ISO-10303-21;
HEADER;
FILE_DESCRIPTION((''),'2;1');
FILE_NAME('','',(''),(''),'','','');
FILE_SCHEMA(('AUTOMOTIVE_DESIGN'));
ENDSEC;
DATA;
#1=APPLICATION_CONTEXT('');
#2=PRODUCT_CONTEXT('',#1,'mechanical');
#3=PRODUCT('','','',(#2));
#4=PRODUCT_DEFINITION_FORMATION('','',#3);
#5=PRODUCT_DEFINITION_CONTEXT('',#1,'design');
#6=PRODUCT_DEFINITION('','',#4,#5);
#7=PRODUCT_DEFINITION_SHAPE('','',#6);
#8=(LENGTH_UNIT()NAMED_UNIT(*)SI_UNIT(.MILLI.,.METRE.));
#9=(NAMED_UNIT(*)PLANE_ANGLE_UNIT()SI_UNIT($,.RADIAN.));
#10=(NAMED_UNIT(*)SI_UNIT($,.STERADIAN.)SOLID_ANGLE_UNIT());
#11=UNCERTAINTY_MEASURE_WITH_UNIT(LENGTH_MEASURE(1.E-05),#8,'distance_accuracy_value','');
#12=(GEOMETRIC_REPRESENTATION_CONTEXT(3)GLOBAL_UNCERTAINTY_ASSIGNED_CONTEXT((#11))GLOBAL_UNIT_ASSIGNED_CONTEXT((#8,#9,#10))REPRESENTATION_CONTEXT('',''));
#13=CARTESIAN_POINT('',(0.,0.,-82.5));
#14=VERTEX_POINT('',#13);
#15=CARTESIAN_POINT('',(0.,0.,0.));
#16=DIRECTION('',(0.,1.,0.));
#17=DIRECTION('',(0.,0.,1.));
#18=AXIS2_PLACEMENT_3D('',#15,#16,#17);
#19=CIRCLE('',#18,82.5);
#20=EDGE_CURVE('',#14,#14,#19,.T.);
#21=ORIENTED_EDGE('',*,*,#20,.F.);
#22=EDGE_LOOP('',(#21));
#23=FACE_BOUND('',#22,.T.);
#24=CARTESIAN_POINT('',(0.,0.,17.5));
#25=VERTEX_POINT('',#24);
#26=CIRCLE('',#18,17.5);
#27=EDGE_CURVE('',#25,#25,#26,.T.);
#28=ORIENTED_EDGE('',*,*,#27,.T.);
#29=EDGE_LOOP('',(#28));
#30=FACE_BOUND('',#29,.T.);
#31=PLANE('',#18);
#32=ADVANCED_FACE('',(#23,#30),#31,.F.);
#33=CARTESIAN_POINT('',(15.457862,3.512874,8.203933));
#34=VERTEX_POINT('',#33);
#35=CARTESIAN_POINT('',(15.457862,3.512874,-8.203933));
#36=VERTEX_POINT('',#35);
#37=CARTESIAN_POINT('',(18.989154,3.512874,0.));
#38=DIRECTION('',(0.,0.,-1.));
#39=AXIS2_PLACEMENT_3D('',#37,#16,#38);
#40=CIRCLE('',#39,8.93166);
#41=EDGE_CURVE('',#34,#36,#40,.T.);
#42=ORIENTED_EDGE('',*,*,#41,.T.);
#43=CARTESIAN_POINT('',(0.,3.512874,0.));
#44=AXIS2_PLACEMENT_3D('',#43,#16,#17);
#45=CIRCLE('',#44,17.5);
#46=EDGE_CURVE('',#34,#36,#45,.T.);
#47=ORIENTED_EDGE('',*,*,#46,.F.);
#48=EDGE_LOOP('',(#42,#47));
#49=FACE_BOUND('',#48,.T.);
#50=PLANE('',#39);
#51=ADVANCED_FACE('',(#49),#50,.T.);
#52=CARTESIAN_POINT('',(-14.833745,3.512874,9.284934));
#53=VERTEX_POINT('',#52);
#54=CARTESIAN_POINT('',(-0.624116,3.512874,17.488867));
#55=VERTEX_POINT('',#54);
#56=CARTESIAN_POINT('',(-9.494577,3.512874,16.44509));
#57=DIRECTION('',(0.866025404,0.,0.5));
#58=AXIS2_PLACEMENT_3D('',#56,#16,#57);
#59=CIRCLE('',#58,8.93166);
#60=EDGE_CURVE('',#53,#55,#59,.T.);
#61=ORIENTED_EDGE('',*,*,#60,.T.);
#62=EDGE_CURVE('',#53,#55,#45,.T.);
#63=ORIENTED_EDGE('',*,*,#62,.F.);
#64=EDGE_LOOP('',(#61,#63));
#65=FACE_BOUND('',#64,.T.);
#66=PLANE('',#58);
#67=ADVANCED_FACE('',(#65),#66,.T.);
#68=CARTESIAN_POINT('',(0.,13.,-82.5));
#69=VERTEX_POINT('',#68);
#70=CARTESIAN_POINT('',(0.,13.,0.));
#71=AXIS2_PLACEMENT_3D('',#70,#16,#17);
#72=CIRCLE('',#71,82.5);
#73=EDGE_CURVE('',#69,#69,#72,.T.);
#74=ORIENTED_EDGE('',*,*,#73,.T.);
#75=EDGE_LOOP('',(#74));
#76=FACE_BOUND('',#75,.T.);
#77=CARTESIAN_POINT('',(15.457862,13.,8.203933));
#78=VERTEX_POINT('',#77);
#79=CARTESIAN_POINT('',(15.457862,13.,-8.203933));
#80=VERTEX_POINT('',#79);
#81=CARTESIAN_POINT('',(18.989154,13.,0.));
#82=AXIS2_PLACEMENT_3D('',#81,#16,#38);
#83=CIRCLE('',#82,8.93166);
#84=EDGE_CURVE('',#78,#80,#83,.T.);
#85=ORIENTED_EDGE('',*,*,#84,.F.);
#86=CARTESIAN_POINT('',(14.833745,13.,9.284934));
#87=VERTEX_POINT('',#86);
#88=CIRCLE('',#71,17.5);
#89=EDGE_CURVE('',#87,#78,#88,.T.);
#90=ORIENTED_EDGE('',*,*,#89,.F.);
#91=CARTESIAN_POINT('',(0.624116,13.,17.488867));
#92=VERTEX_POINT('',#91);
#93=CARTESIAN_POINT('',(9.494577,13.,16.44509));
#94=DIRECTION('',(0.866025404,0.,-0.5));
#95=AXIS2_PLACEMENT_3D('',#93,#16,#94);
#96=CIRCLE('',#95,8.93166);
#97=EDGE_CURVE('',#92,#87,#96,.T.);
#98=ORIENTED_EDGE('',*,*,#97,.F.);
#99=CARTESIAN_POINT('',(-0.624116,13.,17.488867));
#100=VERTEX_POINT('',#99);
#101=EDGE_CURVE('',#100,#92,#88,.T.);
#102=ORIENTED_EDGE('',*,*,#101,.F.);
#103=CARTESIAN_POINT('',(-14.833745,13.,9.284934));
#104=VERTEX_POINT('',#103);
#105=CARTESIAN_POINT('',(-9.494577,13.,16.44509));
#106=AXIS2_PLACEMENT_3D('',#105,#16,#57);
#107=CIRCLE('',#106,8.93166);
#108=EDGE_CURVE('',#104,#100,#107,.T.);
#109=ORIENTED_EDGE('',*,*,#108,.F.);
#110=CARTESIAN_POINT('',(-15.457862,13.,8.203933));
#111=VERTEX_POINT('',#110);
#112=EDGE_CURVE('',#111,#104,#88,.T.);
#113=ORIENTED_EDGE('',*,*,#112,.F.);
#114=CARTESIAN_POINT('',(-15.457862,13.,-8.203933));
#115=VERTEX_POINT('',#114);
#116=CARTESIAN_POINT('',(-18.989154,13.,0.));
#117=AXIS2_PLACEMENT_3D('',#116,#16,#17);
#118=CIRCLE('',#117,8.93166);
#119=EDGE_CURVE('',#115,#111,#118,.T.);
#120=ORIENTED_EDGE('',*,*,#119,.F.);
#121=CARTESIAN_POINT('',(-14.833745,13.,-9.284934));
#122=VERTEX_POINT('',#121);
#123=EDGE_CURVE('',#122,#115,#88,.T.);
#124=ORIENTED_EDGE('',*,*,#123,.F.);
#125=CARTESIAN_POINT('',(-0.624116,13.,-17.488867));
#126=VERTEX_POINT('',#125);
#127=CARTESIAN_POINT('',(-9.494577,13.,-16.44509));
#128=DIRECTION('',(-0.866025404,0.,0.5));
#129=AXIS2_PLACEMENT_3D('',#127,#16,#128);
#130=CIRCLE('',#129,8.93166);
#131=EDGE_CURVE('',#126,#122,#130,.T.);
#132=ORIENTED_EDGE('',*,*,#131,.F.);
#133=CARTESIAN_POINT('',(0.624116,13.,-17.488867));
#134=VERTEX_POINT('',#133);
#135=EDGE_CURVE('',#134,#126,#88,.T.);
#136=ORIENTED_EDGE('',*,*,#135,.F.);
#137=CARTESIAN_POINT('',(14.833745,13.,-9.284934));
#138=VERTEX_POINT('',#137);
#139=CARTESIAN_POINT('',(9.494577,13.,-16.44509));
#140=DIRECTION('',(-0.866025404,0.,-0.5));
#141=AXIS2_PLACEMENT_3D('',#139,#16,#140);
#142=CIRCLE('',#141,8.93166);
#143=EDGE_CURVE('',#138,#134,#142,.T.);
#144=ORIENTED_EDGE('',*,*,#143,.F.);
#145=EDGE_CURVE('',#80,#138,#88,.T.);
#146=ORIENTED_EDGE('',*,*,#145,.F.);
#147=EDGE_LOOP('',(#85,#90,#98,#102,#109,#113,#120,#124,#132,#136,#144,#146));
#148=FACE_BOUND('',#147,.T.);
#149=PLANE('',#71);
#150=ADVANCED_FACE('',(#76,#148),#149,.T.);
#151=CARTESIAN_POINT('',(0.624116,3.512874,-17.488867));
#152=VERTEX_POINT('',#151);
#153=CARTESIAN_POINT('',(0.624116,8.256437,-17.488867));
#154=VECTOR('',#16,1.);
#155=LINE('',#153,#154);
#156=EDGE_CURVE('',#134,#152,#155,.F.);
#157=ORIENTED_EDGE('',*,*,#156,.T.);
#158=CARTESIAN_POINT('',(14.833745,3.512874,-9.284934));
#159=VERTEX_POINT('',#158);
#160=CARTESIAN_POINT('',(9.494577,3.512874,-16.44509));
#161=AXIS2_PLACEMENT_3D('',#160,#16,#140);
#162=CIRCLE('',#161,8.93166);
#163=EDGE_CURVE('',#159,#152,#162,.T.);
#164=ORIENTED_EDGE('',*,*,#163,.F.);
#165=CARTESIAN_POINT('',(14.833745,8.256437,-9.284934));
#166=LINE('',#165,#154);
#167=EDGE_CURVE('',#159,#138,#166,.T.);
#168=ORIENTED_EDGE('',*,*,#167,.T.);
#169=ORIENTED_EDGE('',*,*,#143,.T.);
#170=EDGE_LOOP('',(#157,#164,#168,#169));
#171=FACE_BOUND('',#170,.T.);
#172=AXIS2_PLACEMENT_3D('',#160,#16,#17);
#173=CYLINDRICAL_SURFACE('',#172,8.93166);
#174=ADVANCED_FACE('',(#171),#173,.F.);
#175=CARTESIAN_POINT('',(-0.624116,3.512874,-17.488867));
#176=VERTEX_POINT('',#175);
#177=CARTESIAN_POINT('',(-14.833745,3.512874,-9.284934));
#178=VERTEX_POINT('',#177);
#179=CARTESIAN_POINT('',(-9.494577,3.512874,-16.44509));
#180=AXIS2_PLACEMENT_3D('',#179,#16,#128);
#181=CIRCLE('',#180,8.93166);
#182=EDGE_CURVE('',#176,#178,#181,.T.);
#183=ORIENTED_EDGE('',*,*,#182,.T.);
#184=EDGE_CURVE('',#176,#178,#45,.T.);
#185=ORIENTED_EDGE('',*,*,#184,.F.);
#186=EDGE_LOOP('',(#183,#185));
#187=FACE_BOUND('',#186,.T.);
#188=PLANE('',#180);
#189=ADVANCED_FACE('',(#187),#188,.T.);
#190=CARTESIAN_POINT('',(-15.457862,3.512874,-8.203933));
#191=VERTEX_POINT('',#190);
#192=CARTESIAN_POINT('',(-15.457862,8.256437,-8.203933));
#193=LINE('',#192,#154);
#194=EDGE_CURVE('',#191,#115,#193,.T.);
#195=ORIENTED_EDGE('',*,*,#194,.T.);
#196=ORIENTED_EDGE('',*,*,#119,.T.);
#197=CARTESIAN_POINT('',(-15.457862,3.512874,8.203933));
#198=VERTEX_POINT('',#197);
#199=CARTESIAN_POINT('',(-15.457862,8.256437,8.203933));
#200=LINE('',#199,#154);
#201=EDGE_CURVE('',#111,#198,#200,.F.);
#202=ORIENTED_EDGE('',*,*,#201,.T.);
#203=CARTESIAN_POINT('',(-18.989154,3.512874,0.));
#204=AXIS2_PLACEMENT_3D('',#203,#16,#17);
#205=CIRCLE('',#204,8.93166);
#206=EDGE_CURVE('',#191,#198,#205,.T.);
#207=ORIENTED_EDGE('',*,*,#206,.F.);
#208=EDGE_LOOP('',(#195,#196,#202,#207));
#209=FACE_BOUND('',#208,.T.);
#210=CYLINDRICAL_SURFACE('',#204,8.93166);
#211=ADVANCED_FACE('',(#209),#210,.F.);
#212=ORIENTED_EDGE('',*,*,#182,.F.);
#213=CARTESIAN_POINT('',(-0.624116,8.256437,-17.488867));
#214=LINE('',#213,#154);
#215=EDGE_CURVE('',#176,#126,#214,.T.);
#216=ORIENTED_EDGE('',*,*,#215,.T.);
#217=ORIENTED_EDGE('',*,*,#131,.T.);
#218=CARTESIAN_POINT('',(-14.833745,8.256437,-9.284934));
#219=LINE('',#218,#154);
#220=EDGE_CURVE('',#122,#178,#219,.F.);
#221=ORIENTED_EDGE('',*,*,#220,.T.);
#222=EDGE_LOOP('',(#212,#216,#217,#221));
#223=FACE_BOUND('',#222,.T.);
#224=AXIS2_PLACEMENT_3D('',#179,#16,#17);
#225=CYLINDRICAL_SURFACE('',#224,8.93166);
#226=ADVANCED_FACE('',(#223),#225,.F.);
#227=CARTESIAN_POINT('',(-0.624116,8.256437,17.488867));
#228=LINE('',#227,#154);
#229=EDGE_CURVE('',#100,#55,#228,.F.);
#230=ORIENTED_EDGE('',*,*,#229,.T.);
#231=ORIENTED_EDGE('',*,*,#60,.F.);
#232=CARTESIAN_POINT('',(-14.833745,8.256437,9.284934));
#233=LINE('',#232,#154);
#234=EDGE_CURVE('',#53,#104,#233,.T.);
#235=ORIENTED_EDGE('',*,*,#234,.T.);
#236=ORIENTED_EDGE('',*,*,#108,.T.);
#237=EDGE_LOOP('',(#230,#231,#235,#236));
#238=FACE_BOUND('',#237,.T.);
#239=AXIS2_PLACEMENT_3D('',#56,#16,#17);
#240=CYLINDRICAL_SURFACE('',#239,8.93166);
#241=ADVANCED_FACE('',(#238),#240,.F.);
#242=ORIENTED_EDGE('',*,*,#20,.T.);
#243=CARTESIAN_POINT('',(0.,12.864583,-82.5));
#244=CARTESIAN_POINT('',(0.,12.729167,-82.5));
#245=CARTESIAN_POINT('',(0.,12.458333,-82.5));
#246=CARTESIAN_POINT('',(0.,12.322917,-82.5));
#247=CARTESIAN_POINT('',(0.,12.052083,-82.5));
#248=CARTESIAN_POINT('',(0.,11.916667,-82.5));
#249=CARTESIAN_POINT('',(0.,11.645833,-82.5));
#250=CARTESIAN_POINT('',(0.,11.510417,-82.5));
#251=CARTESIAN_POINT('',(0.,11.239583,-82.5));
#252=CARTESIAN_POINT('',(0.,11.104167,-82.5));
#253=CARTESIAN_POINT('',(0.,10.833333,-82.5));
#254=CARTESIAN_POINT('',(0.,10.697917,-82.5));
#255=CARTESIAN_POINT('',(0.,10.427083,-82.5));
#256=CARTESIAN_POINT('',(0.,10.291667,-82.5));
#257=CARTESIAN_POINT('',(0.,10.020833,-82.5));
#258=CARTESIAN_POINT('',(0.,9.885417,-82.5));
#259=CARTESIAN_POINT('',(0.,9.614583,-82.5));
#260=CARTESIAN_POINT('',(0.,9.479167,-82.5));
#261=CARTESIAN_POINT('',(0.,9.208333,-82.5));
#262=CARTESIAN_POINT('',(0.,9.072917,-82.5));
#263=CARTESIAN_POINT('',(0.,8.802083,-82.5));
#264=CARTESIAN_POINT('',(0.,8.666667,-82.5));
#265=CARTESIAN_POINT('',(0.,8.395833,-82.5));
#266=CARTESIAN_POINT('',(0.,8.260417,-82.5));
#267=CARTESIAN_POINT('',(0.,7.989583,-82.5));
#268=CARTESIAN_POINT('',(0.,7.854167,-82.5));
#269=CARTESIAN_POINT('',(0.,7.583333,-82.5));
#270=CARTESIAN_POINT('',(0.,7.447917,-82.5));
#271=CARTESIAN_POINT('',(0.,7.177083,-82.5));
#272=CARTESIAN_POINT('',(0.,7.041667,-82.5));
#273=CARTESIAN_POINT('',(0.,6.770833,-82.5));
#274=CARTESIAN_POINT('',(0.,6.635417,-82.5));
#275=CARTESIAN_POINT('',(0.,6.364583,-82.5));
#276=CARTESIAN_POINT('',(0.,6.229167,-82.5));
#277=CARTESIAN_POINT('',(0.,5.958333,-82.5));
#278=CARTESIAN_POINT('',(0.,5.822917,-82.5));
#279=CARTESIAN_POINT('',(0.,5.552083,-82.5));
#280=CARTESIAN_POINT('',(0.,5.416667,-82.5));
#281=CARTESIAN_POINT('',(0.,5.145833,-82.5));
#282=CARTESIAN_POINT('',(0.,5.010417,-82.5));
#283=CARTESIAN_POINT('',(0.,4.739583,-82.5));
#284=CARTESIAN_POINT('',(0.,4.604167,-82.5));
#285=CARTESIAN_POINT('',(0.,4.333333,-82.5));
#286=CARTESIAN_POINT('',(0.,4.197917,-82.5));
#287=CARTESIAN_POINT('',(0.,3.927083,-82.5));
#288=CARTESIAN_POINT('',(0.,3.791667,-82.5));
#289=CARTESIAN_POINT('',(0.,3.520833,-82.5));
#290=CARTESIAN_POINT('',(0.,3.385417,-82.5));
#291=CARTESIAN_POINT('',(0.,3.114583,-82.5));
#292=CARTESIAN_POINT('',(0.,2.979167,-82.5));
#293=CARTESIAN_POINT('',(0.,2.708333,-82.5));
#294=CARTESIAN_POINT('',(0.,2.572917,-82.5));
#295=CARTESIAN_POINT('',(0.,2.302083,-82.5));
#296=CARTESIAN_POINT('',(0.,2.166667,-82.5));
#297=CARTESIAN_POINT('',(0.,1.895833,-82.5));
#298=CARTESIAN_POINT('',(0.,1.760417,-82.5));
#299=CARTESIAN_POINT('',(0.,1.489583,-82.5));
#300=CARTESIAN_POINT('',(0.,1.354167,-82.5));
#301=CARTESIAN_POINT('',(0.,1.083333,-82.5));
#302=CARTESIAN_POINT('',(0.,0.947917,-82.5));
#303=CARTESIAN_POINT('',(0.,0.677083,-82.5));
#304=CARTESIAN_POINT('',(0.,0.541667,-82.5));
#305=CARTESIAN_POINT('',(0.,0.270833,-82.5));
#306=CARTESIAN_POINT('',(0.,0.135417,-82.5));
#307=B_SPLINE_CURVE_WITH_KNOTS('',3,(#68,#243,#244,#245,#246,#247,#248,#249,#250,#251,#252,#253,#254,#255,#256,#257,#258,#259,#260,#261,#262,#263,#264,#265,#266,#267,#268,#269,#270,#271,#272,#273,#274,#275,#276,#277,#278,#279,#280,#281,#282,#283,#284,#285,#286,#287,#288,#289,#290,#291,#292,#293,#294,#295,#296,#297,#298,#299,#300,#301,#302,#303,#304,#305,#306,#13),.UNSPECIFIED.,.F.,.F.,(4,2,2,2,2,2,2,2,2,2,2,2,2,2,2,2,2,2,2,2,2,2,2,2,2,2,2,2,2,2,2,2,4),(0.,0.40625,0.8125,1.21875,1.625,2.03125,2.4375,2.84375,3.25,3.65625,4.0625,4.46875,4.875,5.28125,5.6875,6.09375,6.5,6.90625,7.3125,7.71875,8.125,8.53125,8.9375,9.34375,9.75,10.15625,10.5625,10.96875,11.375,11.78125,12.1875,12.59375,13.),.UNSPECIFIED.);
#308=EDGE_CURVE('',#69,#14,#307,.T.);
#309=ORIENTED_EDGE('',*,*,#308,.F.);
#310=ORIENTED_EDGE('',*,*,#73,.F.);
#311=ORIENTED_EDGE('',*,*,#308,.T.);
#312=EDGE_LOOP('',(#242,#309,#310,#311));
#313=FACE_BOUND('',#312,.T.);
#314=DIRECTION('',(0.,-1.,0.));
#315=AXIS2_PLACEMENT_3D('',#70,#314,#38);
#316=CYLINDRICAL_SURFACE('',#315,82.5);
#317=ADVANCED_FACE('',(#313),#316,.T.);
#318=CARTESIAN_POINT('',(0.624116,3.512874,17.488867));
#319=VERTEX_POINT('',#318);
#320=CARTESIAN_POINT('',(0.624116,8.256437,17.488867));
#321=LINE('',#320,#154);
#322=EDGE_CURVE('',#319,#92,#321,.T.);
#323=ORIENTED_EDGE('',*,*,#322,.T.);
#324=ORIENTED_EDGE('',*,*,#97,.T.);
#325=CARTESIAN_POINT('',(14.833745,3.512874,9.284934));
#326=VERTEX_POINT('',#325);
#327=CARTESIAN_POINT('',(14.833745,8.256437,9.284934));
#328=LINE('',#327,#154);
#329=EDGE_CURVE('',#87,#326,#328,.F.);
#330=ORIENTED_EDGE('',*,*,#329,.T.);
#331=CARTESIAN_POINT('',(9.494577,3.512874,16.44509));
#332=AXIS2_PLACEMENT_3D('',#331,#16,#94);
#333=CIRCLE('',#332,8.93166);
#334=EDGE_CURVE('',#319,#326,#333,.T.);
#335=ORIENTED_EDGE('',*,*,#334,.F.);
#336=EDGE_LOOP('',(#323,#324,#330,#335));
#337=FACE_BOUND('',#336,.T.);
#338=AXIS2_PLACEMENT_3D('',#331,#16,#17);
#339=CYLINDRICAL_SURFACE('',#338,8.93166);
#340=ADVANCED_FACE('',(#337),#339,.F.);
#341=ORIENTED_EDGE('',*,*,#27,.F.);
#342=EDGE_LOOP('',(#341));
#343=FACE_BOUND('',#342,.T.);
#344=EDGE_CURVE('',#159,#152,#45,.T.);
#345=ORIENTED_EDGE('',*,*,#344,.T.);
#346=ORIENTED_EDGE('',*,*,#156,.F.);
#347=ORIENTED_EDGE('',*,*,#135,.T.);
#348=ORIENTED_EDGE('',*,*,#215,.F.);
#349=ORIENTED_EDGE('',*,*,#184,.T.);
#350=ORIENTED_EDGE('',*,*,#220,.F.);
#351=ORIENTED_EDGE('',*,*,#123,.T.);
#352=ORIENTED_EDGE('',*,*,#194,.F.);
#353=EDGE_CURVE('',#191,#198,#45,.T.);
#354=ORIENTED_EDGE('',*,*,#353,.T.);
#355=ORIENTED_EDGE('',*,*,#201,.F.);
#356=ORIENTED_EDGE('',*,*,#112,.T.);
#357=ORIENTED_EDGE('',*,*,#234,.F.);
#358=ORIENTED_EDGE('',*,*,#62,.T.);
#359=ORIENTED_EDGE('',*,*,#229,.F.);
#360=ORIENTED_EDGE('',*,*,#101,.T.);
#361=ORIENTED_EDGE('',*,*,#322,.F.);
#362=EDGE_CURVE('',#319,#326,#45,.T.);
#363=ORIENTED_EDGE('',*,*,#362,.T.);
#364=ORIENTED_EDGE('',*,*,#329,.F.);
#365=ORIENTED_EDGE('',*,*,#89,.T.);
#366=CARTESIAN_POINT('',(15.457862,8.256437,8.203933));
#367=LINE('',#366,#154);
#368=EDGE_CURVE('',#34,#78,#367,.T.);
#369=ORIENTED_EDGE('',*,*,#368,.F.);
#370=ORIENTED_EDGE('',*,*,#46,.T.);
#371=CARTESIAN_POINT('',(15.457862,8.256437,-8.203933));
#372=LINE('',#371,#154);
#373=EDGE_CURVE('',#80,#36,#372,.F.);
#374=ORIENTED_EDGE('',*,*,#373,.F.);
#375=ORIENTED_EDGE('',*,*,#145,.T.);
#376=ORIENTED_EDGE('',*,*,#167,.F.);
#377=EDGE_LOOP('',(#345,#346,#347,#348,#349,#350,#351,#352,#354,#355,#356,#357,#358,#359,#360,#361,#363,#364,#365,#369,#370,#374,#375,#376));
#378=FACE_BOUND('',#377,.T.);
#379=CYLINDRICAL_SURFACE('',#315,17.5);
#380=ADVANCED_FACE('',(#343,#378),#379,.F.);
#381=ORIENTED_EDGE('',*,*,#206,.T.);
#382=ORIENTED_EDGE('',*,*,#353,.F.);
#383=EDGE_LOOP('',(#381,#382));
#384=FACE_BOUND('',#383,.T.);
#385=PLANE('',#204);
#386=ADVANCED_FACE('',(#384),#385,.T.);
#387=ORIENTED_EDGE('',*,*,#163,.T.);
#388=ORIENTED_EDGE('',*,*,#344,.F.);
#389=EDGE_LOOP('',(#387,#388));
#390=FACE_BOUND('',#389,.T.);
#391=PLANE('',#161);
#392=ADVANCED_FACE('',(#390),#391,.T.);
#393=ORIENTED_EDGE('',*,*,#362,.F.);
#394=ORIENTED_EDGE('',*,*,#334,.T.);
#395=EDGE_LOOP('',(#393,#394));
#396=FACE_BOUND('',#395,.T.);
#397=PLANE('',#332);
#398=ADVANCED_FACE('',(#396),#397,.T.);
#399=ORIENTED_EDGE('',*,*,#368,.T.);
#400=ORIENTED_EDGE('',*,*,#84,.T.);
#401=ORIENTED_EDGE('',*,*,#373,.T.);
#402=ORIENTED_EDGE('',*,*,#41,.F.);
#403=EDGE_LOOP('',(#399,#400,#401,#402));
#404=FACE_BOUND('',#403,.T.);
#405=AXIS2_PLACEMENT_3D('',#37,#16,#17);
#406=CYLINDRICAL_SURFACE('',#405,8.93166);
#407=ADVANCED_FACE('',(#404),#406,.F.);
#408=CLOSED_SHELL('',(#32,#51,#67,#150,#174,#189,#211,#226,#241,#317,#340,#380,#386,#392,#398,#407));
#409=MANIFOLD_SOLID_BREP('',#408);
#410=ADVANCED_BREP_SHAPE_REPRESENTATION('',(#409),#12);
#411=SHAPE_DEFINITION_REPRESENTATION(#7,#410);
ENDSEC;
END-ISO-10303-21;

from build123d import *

# Parameters (mm, degrees)
SKETCH1_R           = 82.5
BOSS_EXTRUDE1_DEPTH = 13
SKETCH2_R           = 17.5
CUT_EXTRUDE1_DEPTH  = 118.394633608
SKETCH3_R           = 8.931659519
CUT_EXTRUDE2_DEPTH  = 9.487125671
CIRPATTERN1_COUNT   = 6


with BuildPart() as part:
    # Sketch1 → Boss-Extrude1 (new body)
    with BuildSketch(Plane(origin=(0, 0, 0), x_dir=(1, 0, 0), z_dir=(0, 1, 0))):
        Circle(SKETCH1_R)
    extrude(amount=BOSS_EXTRUDE1_DEPTH)

    # Sketch2 → Cut-Extrude1 (cut, through all)
    with BuildSketch(Plane(origin=(0, 0, 0), x_dir=(1, 0, 0), z_dir=(0, 1, 0))):
        Circle(SKETCH2_R)
    extrude(amount=CUT_EXTRUDE1_DEPTH, mode=Mode.SUBTRACT)

    # Sketch3 → Cut-Extrude2 (cut)
    with BuildSketch(Plane(origin=(0, 13, 0), x_dir=(1, 0, 0), z_dir=(0, 1, 0))):
        with Locations((-18.989153976, 0)):
            Circle(SKETCH3_R)
    cut_extrude2 = extrude(amount=-CUT_EXTRUDE2_DEPTH, mode=Mode.SUBTRACT)

    # CirPattern1: Cut-Extrude2 ×6 about axis
    cirpattern1_axis = Axis((0, 0, 0), (0, 1, 0))
    for i in range(1, CIRPATTERN1_COUNT):
        add(cut_extrude2.rotate(cirpattern1_axis, i * 360 / CIRPATTERN1_COUNT), mode=Mode.SUBTRACT)


solid = part.part
